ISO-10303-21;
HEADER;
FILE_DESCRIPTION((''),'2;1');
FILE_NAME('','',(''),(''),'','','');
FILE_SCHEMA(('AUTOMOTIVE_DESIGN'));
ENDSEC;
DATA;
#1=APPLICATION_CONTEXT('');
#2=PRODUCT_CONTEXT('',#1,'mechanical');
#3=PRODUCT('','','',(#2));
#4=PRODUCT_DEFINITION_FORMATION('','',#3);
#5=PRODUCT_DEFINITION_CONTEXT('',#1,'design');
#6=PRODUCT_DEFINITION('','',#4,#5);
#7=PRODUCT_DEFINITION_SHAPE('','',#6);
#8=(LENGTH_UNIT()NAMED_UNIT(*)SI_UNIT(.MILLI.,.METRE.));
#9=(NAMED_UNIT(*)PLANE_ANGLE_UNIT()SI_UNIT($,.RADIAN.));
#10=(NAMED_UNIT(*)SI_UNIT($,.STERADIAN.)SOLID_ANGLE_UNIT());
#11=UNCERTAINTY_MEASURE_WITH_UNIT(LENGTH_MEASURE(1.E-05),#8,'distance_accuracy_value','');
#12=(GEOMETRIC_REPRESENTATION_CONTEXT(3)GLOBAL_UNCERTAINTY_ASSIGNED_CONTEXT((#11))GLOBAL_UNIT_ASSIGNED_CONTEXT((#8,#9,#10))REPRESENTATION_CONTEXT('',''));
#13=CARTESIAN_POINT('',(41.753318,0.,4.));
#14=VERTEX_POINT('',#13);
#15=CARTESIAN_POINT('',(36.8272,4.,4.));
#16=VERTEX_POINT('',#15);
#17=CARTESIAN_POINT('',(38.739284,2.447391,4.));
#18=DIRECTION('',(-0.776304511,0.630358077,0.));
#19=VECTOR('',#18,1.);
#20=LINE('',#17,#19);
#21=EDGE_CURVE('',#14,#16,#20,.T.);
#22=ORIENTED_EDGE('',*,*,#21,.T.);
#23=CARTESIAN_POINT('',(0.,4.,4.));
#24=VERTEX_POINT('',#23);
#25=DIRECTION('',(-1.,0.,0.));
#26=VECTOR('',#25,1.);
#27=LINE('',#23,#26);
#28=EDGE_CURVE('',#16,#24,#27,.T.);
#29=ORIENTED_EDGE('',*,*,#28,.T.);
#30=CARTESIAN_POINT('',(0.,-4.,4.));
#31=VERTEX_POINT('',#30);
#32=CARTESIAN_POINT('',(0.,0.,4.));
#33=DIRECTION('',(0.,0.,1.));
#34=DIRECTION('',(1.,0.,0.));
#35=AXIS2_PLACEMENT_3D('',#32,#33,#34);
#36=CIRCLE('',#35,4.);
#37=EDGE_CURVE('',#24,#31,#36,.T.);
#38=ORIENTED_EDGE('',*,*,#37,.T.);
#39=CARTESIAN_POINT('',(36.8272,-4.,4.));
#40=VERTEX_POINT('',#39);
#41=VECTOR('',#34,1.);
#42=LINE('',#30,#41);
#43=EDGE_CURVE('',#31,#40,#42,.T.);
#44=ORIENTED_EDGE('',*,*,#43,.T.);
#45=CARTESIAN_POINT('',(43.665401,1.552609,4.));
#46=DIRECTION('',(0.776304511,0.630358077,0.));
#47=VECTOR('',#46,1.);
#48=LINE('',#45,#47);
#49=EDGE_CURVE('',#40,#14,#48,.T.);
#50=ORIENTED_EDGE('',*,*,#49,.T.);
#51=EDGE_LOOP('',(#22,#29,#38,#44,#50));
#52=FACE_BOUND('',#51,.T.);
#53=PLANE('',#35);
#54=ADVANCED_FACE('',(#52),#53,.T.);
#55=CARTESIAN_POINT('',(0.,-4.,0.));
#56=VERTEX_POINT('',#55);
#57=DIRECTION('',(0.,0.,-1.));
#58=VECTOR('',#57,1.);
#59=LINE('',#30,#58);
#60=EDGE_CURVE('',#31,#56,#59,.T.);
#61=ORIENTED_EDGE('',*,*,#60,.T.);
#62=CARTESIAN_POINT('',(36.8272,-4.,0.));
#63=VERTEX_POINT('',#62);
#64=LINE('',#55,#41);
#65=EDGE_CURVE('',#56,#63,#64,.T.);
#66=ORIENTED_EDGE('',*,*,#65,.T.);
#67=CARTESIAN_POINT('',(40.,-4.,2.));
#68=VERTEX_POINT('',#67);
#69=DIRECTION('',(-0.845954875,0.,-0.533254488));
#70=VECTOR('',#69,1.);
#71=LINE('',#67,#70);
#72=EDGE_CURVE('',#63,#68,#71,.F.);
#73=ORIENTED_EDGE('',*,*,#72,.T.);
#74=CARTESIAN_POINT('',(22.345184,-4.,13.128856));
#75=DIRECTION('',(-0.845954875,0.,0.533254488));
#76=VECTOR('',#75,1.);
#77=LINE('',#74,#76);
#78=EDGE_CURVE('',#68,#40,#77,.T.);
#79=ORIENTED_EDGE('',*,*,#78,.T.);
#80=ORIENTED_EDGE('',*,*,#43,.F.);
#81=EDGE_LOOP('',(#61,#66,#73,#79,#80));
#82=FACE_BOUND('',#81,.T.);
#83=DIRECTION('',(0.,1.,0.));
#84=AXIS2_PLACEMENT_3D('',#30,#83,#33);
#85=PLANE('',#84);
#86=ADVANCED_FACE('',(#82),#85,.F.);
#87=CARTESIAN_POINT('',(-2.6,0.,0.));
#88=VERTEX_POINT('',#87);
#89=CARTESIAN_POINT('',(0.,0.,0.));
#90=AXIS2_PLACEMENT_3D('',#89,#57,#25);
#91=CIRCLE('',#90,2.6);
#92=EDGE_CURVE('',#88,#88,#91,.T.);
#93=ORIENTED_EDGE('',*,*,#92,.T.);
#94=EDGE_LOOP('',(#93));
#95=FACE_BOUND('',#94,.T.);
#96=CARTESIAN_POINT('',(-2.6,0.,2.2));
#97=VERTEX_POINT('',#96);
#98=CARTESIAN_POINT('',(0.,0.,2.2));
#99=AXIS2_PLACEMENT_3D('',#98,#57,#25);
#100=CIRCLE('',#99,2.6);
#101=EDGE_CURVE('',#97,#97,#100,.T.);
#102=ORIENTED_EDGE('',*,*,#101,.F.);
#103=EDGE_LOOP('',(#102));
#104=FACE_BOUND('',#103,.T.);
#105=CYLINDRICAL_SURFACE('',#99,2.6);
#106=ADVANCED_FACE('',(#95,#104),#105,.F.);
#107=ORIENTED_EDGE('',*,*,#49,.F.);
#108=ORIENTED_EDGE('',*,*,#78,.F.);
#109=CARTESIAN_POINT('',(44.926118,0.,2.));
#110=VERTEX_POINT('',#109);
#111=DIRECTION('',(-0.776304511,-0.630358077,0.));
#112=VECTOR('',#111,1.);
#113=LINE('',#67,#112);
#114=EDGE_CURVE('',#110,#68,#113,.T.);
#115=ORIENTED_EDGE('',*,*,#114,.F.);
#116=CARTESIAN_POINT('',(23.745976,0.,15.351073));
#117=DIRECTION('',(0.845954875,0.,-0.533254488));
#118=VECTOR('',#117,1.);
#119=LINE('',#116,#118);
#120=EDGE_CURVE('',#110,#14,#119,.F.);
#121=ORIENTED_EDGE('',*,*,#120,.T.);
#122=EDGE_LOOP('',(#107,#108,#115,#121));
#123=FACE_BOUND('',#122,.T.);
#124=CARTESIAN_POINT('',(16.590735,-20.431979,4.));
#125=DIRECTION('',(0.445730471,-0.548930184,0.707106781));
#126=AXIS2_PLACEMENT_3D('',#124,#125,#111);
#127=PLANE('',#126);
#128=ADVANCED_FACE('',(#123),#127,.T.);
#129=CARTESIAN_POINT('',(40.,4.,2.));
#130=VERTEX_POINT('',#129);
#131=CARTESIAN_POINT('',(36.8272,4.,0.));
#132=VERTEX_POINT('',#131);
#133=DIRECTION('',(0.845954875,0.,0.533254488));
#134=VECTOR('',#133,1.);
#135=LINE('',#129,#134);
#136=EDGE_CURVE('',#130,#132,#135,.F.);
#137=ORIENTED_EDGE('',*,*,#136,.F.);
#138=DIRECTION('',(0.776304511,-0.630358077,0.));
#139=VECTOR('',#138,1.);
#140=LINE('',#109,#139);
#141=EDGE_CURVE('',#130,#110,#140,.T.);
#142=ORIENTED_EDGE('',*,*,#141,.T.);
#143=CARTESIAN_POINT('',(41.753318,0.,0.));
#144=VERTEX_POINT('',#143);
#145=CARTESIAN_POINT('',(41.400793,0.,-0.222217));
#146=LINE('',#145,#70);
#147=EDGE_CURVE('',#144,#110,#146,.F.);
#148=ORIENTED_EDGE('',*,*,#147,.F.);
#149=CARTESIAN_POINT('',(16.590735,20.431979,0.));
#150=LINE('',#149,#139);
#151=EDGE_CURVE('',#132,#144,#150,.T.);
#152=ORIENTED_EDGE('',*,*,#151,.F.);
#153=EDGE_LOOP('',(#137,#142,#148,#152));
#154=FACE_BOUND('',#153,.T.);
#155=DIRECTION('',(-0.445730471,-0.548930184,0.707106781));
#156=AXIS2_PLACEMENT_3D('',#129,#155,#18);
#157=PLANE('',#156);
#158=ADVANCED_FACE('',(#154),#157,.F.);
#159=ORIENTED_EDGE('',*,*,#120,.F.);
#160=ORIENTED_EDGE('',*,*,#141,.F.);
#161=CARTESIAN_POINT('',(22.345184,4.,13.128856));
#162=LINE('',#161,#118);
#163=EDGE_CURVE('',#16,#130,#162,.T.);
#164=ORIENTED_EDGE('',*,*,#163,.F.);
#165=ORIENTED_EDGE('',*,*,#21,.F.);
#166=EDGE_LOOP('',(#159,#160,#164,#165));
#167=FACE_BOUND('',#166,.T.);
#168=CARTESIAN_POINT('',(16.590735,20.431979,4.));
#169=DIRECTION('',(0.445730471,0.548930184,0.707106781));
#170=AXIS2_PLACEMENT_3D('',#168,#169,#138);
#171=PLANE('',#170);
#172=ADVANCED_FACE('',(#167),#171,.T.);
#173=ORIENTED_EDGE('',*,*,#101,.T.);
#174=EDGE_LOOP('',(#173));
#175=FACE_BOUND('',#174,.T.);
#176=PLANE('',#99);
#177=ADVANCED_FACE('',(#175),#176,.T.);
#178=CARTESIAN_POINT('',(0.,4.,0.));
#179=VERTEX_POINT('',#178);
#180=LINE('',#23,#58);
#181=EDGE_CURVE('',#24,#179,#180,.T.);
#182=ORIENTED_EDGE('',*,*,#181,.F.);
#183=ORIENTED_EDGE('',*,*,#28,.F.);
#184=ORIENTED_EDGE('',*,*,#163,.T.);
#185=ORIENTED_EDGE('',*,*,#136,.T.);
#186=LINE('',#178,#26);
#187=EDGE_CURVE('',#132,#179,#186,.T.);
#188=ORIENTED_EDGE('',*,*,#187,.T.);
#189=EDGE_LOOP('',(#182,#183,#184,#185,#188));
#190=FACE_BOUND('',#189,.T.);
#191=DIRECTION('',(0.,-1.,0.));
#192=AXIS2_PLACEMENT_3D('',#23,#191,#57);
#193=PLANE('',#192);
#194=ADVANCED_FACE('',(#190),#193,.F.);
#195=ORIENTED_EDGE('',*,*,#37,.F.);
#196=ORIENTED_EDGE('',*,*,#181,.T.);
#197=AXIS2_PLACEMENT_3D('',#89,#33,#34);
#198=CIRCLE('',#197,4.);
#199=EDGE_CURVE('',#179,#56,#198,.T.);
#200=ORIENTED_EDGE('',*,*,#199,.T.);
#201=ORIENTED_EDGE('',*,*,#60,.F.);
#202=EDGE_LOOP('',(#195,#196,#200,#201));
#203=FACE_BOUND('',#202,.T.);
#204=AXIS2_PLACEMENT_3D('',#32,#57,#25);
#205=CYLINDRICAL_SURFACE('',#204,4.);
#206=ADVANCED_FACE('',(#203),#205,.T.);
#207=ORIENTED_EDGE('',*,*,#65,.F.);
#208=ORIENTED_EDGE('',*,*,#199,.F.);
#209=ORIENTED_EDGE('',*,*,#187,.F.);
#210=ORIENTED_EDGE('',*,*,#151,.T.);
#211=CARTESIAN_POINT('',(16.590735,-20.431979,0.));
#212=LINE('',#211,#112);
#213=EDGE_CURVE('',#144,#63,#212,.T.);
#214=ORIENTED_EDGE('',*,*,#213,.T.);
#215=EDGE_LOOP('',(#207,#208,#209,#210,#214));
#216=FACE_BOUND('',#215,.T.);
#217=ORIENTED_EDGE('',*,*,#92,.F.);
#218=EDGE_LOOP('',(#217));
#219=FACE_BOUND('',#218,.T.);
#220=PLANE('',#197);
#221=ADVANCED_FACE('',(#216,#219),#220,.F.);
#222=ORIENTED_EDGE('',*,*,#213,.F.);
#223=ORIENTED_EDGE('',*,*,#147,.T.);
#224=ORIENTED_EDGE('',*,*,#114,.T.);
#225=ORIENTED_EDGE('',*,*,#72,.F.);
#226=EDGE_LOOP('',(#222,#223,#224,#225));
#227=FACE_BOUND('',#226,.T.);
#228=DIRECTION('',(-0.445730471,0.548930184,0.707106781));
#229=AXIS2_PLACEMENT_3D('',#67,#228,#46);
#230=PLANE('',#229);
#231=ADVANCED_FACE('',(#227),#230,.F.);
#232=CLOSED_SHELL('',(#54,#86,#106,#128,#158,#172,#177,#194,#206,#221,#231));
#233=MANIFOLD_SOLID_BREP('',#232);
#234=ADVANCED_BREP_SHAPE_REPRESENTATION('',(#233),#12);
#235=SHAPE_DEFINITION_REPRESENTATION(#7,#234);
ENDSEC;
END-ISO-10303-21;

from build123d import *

# Parameters (mm, degrees)
EXTRUDE_1_DEPTH     = 4
SKETCH_2_R          = 2.6
CUT_EXTRUDE_1_DEPTH = 2.2
CHAMFER_2_SIZE      = 2


with BuildPart() as part:
    # 草图1 → 凸台-拉伸1 (new body)
    with BuildSketch(Plane.XY):
        with BuildLine():
            Line((0, 4), (40, 4))
            Line((40, 4), (44.926117642, 0))
            Line((44.926117642, 0), (40, -4))
            Line((40, -4), (0, -4))
            ThreePointArc((0, -4), (-4, 0), (0, 4))
        make_face()
    extrude(amount=EXTRUDE_1_DEPTH)

    # 草图2 → 切除-拉伸1 (cut)
    with BuildSketch(Plane(origin=(0, 0, 0), x_dir=(-1, 0, 0), z_dir=(0, 0, -1))):
        Circle(SKETCH_2_R)
    extrude(amount=-CUT_EXTRUDE_1_DEPTH, mode=Mode.SUBTRACT)

    # 倒角2
    chamfer_2_edges = [part.edges().sort_by_distance(p)[0] for p in [
        (42.463058821, -2, 0),
        (42.463058821, 2, 0),
        (42.463058821, -2, 4),
        (42.463058821, 2, 4),
    ]]
    chamfer(chamfer_2_edges, length=CHAMFER_2_SIZE - 0.0001)  # a hair under: the kernel refuses the full size


solid = part.part
